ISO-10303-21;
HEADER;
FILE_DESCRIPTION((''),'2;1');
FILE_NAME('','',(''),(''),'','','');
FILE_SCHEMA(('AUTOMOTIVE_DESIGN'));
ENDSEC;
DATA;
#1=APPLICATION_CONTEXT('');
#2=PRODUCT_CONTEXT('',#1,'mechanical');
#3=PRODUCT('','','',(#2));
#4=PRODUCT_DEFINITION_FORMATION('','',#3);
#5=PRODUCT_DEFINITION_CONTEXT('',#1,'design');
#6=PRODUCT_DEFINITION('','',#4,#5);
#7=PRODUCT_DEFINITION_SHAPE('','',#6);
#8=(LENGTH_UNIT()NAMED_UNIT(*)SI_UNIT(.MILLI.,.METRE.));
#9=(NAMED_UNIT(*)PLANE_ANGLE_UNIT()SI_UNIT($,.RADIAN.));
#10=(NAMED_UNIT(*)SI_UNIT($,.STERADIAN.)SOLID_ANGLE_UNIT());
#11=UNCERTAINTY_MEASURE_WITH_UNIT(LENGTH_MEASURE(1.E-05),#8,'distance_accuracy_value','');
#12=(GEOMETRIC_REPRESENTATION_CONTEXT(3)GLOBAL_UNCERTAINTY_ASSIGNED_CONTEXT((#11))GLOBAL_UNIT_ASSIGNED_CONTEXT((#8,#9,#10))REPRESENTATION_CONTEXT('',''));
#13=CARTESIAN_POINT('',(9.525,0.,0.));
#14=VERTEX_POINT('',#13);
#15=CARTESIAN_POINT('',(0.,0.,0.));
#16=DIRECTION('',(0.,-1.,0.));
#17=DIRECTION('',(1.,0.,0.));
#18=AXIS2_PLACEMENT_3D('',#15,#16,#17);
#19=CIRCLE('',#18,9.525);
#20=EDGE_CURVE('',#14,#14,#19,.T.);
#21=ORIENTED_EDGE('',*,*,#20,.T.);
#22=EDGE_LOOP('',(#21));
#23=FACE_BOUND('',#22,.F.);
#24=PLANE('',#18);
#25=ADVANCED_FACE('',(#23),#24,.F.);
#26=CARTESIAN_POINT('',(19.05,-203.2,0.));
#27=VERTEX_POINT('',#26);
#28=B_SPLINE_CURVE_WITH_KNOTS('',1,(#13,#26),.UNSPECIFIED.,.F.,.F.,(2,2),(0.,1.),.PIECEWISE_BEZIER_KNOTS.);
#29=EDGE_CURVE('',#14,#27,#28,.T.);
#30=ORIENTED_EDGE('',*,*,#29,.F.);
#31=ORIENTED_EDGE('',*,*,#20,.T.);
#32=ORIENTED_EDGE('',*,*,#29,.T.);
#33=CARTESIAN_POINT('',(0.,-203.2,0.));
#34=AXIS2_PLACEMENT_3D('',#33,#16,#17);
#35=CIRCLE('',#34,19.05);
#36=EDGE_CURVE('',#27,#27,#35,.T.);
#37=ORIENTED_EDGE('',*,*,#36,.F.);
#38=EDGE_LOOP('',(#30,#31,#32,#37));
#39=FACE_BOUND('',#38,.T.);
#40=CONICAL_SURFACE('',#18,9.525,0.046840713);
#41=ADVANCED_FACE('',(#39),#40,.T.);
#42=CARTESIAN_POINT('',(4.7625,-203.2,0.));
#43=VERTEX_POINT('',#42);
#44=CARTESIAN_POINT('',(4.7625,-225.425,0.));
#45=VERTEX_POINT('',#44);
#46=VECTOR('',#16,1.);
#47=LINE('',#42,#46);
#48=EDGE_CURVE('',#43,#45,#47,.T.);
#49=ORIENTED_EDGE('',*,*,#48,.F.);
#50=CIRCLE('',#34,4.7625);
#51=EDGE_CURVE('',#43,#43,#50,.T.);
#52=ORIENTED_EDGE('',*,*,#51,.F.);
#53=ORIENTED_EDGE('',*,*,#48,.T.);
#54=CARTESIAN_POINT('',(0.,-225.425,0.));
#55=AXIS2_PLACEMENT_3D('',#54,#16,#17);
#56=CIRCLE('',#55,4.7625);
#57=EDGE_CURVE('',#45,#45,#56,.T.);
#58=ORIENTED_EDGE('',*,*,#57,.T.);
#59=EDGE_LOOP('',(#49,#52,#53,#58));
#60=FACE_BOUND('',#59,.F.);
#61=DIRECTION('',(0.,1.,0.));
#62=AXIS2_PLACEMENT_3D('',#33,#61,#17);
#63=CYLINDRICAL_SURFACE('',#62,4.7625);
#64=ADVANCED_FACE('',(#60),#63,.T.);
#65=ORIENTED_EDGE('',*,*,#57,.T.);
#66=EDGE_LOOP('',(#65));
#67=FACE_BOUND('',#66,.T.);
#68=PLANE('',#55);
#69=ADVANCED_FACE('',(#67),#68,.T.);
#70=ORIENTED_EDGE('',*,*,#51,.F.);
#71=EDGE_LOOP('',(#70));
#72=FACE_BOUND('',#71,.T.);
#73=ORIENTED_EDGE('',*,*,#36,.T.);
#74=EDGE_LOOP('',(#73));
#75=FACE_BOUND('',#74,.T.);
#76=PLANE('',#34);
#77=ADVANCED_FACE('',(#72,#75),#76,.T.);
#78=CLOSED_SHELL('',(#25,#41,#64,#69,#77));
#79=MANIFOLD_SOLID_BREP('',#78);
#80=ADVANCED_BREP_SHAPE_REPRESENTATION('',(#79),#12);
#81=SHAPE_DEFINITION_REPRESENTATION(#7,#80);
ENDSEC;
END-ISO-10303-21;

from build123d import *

# Parameters (mm, degrees)
F0_R     = 9.525
F2_R     = 19.05
F4_R     = 4.7625
F5_DEPTH = 22.225


# Not quite as in the source:
# - a feature of the source that left no trace in its solid (it failed there, or was rolled back) is left out


with BuildPart() as f3:
    # F0 (on Front) → F3 section 0
    with BuildSketch(Plane.XZ):
        Circle(F0_R)
    # F2 (on offset) → F3 section 1
    with BuildSketch(Plane.XZ.offset(203.2)):
        Circle(F2_R)
    loft()

    # F4 (on offset) → F5 (join)
    with BuildSketch(Plane.XZ.offset(203.2)):
        Circle(F4_R)
    extrude(amount=F5_DEPTH)


solid = f3.part
